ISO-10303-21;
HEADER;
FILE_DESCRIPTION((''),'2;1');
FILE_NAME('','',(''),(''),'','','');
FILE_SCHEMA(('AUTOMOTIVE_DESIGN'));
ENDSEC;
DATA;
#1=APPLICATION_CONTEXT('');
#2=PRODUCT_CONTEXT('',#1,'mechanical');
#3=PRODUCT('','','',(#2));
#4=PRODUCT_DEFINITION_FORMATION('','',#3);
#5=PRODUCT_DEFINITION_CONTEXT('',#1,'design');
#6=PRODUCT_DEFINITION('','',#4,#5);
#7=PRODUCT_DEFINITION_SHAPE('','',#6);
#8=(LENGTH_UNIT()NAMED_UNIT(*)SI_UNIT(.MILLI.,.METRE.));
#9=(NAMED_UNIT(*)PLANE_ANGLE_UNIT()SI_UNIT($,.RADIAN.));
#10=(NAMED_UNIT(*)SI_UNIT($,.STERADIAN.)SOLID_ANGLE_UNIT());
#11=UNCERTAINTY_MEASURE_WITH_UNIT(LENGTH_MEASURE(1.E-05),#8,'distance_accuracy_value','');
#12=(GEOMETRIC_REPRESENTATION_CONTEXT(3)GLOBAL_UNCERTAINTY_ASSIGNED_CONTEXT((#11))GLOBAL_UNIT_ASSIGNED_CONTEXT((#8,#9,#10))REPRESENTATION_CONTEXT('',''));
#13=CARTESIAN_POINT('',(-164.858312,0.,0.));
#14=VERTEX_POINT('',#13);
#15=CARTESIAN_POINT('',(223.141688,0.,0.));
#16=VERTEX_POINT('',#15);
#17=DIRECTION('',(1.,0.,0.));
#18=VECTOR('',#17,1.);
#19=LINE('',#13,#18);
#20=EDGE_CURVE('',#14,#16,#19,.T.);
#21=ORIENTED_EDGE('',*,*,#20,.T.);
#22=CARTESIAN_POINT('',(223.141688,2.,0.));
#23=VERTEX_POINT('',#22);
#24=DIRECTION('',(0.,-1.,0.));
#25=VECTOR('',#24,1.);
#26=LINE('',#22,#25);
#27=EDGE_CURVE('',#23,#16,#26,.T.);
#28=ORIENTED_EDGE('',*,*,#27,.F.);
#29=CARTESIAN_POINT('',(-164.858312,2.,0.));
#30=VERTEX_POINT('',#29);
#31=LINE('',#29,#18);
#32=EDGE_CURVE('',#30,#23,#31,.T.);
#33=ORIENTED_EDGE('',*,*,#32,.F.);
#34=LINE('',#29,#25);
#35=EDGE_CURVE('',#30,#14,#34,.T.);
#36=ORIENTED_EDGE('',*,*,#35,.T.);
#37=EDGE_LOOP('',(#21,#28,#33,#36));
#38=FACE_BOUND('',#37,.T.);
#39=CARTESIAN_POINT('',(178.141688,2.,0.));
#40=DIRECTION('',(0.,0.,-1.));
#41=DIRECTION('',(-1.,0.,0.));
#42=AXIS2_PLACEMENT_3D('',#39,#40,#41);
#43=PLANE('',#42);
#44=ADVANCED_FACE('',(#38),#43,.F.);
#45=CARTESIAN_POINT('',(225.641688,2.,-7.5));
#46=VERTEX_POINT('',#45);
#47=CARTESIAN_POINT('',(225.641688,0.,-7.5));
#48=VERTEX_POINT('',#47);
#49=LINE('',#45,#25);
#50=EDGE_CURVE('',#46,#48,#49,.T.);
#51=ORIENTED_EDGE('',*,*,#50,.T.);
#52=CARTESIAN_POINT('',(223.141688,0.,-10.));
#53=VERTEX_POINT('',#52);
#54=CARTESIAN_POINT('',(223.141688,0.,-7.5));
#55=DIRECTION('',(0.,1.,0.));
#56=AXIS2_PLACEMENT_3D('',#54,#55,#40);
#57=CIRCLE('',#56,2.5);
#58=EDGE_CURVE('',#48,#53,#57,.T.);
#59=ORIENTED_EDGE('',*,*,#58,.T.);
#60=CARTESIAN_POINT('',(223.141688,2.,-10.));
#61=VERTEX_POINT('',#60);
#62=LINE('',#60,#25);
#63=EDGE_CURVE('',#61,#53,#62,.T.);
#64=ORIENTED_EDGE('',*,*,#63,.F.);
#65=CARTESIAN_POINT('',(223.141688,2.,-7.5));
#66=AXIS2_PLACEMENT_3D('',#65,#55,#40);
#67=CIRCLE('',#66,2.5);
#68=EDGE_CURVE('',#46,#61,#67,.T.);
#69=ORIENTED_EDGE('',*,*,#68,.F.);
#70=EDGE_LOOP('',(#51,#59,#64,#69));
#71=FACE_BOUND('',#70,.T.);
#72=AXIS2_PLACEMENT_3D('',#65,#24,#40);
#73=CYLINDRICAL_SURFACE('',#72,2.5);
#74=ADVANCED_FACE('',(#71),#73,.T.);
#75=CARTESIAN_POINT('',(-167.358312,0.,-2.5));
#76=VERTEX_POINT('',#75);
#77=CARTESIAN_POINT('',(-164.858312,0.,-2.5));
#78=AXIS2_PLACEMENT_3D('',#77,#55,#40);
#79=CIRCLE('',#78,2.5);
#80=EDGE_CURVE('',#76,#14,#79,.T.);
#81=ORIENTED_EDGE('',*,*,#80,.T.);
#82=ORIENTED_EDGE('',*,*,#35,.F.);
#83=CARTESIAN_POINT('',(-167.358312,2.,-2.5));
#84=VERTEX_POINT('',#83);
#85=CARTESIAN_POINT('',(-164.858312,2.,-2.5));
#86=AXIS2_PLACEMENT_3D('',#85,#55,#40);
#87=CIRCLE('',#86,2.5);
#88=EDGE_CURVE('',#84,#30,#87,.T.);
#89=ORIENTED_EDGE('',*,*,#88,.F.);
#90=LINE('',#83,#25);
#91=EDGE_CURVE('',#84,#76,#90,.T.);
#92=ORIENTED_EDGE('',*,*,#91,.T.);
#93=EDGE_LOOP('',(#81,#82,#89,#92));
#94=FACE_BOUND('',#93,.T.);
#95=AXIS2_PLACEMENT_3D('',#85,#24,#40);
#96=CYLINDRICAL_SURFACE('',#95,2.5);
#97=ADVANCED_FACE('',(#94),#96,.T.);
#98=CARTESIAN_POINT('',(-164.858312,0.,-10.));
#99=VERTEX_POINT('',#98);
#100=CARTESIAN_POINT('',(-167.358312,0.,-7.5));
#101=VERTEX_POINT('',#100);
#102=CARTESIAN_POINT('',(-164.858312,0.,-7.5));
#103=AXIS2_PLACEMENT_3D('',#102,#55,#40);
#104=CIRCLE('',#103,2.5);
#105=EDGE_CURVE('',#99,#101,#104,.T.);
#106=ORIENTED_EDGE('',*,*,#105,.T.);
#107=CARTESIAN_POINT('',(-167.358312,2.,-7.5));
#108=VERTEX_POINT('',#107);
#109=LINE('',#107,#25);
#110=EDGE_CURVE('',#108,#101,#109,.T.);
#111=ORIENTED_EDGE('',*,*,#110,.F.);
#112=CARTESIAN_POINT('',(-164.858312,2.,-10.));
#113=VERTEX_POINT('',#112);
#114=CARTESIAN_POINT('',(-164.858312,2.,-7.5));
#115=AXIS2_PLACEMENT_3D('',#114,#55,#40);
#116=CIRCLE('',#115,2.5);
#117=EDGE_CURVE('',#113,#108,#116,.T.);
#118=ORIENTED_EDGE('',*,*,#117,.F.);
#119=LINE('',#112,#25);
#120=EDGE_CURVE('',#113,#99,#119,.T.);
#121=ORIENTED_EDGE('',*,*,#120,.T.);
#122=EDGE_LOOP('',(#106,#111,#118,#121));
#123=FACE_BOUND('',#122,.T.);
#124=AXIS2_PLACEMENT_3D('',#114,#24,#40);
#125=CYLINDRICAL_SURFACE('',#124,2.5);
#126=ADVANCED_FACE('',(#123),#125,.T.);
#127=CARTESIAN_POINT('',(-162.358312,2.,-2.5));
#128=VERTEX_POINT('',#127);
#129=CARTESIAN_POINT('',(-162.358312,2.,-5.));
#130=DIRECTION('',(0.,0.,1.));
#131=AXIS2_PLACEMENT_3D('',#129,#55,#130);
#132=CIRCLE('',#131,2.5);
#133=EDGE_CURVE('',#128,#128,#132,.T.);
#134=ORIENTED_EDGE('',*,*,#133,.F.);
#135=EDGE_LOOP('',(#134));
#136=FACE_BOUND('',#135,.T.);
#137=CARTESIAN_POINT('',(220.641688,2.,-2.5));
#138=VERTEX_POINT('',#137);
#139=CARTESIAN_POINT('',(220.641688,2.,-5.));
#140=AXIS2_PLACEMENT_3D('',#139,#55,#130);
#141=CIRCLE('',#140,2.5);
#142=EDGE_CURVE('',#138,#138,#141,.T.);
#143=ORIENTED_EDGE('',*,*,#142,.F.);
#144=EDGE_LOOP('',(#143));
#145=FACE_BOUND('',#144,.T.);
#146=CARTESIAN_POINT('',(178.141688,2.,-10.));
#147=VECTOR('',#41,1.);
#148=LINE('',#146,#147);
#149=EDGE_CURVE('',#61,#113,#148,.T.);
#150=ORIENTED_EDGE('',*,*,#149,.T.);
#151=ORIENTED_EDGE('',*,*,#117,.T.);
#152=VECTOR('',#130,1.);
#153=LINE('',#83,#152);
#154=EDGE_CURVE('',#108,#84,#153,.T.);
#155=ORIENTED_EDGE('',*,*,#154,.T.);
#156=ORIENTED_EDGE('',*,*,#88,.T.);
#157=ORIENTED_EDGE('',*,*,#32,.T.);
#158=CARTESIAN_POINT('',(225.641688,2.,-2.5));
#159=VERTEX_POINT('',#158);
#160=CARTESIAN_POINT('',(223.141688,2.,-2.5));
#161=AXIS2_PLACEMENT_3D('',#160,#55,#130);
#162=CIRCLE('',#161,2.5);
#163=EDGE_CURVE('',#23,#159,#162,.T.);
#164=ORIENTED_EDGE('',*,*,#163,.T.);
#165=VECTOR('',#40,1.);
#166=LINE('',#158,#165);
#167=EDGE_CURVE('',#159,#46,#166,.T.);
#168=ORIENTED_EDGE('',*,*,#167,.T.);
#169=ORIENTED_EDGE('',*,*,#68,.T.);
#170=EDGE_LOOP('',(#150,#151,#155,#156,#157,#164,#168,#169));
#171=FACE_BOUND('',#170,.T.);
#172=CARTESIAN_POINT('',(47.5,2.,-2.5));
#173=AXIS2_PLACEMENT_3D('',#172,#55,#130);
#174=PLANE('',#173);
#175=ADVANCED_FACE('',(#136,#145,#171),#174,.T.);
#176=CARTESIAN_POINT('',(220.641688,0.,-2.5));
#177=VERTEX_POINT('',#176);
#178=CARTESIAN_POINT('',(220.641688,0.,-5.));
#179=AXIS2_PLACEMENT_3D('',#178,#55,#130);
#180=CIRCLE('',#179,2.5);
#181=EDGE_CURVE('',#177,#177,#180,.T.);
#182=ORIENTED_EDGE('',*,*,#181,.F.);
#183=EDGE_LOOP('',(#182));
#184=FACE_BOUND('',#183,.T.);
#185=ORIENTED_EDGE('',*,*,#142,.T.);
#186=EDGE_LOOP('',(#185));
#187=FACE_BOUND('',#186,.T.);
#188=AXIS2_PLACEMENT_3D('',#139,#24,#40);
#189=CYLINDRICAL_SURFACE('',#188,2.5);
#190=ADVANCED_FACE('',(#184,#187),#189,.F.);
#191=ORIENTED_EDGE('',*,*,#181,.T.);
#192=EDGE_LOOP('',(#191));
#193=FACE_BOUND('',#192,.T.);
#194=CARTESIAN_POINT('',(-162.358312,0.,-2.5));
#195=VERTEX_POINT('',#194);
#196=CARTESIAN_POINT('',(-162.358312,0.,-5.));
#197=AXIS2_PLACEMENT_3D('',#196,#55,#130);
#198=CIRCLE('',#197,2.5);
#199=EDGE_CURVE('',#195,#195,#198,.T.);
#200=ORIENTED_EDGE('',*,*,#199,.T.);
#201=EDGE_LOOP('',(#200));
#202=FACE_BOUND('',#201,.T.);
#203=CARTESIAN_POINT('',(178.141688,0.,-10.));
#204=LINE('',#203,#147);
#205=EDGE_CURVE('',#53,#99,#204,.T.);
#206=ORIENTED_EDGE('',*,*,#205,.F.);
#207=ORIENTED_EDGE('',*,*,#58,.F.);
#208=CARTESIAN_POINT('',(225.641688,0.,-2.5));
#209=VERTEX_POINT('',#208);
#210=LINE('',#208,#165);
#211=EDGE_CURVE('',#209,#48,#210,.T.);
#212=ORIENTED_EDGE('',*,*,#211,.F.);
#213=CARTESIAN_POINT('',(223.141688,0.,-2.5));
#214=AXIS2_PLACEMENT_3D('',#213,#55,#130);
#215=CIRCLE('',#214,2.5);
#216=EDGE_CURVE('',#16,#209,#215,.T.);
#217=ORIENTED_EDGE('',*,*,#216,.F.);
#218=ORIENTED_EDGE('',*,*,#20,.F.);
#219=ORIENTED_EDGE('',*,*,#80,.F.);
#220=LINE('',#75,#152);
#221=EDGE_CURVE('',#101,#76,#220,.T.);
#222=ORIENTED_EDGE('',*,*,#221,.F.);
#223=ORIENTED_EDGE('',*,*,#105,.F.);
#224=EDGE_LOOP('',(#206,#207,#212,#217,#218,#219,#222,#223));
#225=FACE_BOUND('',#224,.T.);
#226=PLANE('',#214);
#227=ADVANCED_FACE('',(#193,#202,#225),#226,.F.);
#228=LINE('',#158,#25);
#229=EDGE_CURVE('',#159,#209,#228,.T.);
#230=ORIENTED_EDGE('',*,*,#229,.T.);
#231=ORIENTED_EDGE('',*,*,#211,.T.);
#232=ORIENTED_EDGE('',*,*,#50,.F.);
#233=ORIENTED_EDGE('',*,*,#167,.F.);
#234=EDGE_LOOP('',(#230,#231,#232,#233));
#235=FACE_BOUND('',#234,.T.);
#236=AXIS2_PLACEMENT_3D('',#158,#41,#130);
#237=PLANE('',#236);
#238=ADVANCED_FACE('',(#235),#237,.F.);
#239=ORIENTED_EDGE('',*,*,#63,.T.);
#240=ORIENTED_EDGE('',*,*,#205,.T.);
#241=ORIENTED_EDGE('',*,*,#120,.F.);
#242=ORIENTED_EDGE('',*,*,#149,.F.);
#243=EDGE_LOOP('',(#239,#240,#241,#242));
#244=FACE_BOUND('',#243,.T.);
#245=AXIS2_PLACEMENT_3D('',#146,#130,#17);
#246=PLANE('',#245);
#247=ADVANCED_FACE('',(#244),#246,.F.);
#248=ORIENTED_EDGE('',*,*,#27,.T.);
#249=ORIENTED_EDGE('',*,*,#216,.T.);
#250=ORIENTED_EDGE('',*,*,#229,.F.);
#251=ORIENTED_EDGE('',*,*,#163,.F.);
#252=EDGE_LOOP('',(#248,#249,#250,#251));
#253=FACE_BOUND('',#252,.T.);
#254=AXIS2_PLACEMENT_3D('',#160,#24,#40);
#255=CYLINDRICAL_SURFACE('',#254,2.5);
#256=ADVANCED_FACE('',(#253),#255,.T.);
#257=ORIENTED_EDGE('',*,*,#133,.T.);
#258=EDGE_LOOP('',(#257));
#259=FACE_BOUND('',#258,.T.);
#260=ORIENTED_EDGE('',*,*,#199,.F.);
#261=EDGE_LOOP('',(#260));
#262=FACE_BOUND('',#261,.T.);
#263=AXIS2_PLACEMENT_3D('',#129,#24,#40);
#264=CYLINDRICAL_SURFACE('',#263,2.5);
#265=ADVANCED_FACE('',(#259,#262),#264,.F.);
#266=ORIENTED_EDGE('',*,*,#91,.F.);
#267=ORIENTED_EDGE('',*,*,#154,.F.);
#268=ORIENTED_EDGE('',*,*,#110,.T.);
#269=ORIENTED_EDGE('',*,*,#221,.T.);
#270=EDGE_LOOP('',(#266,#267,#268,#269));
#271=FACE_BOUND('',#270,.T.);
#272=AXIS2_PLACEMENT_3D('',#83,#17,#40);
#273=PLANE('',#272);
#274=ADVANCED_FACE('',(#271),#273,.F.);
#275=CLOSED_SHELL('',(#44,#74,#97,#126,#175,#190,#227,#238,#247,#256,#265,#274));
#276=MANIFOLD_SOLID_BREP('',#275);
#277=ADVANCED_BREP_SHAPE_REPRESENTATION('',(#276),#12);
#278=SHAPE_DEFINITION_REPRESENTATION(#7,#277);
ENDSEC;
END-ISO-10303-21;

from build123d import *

# Parameters (mm, degrees)
SKETCH1_R           = 2.5
BOSS_EXTRUDE2_DEPTH = 2
FLEX1_OUTLINE_R     = 2.5
FLEX1_DEPTH         = 2


# Read off the part's stored shape, not the designer's step: Flex1
with BuildPart() as part:
    # Sketch1 → Boss-Extrude2 (new body)
    with BuildSketch(Plane(origin=(0, 0, 0), x_dir=(1, 0, 0), z_dir=(0, 1, 0))):
        with BuildLine():
            Line((2.5, 0), (47.5, 0))
            ThreePointArc((47.5, 0), (49.267766953, 0.732233047), (50, 2.5))
            Line((50, 2.5), (50, 7.5))
            ThreePointArc((50, 7.5), (49.267766953, 9.267766953), (47.5, 10))
            Line((47.5, 10), (2.5, 10))
            ThreePointArc((2.5, 10), (0.732233047, 9.267766953), (0, 7.5))
            Line((0, 7.5), (0, 2.5))
            ThreePointArc((0, 2.5), (0.732233047, 0.732233047), (2.5, 0))
        make_face()
        with Locations(Location((5, 5, 0), (0, 0, 270))):
            Circle(SKETCH1_R, mode=Mode.SUBTRACT)
        with Locations(Location((45, 5, 0), (0, 0, 270))):
            Circle(SKETCH1_R, mode=Mode.SUBTRACT)
    extrude(amount=BOSS_EXTRUDE2_DEPTH)

    # Flex1 outline → Flex1 (add)
    # profile 1 of 4: a face of its own
    with BuildSketch(Plane(origin=(0, 0, 0), x_dir=(1, 0, 0), z_dir=(0, 1, 0))):
        with BuildLine():
            Line((2.5, 10), (-164.858311586, 10))
            ThreePointArc((-164.858311586, 10), (-166.626078539, 9.267766953), (-167.358311586, 7.5))
            Line((-167.358311586, 7.5), (-167.358311586, 2.5))
            ThreePointArc((-167.358311586, 2.5), (-166.626078539, 0.732233047), (-164.858311586, 0))
            Line((-164.858311586, 0), (2.5, 0))
            ThreePointArc((2.5, 0), (0.732233047, 0.732233047), (0, 2.5))
            Line((0, 2.5), (0, 7.5))
            ThreePointArc((0, 7.5), (0.732233047, 9.267766953), (2.5, 10))
        make_face()
        with Locations((-162.358311586, 5)):
            Circle(FLEX1_OUTLINE_R, mode=Mode.SUBTRACT)
    # profile 2 of 4: a face of its own
    with BuildSketch(Plane(origin=(0, 0, 0), x_dir=(1, 0, 0), z_dir=(0, 1, 0))):
        with BuildLine():
            Line((223.141688414, 10), (47.5, 10))
            ThreePointArc((47.5, 10), (49.267766953, 9.267766953), (50, 7.5))
            Line((50, 7.5), (50, 2.5))
            ThreePointArc((50, 2.5), (49.267766953, 0.732233047), (47.5, 0))
            Line((47.5, 0), (223.141688414, 0))
            ThreePointArc((223.141688414, 0), (224.909455367, 0.732233047), (225.641688414, 2.5))
            Line((225.641688414, 2.5), (225.641688414, 7.5))
            ThreePointArc((225.641688414, 7.5), (224.909455367, 9.267766953), (223.141688414, 10))
        make_face()
        with Locations((220.641688414, 5)):
            Circle(FLEX1_OUTLINE_R, mode=Mode.SUBTRACT)
    # profile 3 of 4: a face of its own
    with BuildSketch(Plane(origin=(0, 0, 0), x_dir=(1, 0, 0), z_dir=(0, 1, 0))):
        with Locations((5, 5)):
            Circle(FLEX1_OUTLINE_R)
    # profile 4 of 4: a face of its own
    with BuildSketch(Plane(origin=(0, 0, 0), x_dir=(1, 0, 0), z_dir=(0, 1, 0))):
        with Locations((45, 5)):
            Circle(FLEX1_OUTLINE_R)
    extrude(amount=FLEX1_DEPTH)


solid = part.part
